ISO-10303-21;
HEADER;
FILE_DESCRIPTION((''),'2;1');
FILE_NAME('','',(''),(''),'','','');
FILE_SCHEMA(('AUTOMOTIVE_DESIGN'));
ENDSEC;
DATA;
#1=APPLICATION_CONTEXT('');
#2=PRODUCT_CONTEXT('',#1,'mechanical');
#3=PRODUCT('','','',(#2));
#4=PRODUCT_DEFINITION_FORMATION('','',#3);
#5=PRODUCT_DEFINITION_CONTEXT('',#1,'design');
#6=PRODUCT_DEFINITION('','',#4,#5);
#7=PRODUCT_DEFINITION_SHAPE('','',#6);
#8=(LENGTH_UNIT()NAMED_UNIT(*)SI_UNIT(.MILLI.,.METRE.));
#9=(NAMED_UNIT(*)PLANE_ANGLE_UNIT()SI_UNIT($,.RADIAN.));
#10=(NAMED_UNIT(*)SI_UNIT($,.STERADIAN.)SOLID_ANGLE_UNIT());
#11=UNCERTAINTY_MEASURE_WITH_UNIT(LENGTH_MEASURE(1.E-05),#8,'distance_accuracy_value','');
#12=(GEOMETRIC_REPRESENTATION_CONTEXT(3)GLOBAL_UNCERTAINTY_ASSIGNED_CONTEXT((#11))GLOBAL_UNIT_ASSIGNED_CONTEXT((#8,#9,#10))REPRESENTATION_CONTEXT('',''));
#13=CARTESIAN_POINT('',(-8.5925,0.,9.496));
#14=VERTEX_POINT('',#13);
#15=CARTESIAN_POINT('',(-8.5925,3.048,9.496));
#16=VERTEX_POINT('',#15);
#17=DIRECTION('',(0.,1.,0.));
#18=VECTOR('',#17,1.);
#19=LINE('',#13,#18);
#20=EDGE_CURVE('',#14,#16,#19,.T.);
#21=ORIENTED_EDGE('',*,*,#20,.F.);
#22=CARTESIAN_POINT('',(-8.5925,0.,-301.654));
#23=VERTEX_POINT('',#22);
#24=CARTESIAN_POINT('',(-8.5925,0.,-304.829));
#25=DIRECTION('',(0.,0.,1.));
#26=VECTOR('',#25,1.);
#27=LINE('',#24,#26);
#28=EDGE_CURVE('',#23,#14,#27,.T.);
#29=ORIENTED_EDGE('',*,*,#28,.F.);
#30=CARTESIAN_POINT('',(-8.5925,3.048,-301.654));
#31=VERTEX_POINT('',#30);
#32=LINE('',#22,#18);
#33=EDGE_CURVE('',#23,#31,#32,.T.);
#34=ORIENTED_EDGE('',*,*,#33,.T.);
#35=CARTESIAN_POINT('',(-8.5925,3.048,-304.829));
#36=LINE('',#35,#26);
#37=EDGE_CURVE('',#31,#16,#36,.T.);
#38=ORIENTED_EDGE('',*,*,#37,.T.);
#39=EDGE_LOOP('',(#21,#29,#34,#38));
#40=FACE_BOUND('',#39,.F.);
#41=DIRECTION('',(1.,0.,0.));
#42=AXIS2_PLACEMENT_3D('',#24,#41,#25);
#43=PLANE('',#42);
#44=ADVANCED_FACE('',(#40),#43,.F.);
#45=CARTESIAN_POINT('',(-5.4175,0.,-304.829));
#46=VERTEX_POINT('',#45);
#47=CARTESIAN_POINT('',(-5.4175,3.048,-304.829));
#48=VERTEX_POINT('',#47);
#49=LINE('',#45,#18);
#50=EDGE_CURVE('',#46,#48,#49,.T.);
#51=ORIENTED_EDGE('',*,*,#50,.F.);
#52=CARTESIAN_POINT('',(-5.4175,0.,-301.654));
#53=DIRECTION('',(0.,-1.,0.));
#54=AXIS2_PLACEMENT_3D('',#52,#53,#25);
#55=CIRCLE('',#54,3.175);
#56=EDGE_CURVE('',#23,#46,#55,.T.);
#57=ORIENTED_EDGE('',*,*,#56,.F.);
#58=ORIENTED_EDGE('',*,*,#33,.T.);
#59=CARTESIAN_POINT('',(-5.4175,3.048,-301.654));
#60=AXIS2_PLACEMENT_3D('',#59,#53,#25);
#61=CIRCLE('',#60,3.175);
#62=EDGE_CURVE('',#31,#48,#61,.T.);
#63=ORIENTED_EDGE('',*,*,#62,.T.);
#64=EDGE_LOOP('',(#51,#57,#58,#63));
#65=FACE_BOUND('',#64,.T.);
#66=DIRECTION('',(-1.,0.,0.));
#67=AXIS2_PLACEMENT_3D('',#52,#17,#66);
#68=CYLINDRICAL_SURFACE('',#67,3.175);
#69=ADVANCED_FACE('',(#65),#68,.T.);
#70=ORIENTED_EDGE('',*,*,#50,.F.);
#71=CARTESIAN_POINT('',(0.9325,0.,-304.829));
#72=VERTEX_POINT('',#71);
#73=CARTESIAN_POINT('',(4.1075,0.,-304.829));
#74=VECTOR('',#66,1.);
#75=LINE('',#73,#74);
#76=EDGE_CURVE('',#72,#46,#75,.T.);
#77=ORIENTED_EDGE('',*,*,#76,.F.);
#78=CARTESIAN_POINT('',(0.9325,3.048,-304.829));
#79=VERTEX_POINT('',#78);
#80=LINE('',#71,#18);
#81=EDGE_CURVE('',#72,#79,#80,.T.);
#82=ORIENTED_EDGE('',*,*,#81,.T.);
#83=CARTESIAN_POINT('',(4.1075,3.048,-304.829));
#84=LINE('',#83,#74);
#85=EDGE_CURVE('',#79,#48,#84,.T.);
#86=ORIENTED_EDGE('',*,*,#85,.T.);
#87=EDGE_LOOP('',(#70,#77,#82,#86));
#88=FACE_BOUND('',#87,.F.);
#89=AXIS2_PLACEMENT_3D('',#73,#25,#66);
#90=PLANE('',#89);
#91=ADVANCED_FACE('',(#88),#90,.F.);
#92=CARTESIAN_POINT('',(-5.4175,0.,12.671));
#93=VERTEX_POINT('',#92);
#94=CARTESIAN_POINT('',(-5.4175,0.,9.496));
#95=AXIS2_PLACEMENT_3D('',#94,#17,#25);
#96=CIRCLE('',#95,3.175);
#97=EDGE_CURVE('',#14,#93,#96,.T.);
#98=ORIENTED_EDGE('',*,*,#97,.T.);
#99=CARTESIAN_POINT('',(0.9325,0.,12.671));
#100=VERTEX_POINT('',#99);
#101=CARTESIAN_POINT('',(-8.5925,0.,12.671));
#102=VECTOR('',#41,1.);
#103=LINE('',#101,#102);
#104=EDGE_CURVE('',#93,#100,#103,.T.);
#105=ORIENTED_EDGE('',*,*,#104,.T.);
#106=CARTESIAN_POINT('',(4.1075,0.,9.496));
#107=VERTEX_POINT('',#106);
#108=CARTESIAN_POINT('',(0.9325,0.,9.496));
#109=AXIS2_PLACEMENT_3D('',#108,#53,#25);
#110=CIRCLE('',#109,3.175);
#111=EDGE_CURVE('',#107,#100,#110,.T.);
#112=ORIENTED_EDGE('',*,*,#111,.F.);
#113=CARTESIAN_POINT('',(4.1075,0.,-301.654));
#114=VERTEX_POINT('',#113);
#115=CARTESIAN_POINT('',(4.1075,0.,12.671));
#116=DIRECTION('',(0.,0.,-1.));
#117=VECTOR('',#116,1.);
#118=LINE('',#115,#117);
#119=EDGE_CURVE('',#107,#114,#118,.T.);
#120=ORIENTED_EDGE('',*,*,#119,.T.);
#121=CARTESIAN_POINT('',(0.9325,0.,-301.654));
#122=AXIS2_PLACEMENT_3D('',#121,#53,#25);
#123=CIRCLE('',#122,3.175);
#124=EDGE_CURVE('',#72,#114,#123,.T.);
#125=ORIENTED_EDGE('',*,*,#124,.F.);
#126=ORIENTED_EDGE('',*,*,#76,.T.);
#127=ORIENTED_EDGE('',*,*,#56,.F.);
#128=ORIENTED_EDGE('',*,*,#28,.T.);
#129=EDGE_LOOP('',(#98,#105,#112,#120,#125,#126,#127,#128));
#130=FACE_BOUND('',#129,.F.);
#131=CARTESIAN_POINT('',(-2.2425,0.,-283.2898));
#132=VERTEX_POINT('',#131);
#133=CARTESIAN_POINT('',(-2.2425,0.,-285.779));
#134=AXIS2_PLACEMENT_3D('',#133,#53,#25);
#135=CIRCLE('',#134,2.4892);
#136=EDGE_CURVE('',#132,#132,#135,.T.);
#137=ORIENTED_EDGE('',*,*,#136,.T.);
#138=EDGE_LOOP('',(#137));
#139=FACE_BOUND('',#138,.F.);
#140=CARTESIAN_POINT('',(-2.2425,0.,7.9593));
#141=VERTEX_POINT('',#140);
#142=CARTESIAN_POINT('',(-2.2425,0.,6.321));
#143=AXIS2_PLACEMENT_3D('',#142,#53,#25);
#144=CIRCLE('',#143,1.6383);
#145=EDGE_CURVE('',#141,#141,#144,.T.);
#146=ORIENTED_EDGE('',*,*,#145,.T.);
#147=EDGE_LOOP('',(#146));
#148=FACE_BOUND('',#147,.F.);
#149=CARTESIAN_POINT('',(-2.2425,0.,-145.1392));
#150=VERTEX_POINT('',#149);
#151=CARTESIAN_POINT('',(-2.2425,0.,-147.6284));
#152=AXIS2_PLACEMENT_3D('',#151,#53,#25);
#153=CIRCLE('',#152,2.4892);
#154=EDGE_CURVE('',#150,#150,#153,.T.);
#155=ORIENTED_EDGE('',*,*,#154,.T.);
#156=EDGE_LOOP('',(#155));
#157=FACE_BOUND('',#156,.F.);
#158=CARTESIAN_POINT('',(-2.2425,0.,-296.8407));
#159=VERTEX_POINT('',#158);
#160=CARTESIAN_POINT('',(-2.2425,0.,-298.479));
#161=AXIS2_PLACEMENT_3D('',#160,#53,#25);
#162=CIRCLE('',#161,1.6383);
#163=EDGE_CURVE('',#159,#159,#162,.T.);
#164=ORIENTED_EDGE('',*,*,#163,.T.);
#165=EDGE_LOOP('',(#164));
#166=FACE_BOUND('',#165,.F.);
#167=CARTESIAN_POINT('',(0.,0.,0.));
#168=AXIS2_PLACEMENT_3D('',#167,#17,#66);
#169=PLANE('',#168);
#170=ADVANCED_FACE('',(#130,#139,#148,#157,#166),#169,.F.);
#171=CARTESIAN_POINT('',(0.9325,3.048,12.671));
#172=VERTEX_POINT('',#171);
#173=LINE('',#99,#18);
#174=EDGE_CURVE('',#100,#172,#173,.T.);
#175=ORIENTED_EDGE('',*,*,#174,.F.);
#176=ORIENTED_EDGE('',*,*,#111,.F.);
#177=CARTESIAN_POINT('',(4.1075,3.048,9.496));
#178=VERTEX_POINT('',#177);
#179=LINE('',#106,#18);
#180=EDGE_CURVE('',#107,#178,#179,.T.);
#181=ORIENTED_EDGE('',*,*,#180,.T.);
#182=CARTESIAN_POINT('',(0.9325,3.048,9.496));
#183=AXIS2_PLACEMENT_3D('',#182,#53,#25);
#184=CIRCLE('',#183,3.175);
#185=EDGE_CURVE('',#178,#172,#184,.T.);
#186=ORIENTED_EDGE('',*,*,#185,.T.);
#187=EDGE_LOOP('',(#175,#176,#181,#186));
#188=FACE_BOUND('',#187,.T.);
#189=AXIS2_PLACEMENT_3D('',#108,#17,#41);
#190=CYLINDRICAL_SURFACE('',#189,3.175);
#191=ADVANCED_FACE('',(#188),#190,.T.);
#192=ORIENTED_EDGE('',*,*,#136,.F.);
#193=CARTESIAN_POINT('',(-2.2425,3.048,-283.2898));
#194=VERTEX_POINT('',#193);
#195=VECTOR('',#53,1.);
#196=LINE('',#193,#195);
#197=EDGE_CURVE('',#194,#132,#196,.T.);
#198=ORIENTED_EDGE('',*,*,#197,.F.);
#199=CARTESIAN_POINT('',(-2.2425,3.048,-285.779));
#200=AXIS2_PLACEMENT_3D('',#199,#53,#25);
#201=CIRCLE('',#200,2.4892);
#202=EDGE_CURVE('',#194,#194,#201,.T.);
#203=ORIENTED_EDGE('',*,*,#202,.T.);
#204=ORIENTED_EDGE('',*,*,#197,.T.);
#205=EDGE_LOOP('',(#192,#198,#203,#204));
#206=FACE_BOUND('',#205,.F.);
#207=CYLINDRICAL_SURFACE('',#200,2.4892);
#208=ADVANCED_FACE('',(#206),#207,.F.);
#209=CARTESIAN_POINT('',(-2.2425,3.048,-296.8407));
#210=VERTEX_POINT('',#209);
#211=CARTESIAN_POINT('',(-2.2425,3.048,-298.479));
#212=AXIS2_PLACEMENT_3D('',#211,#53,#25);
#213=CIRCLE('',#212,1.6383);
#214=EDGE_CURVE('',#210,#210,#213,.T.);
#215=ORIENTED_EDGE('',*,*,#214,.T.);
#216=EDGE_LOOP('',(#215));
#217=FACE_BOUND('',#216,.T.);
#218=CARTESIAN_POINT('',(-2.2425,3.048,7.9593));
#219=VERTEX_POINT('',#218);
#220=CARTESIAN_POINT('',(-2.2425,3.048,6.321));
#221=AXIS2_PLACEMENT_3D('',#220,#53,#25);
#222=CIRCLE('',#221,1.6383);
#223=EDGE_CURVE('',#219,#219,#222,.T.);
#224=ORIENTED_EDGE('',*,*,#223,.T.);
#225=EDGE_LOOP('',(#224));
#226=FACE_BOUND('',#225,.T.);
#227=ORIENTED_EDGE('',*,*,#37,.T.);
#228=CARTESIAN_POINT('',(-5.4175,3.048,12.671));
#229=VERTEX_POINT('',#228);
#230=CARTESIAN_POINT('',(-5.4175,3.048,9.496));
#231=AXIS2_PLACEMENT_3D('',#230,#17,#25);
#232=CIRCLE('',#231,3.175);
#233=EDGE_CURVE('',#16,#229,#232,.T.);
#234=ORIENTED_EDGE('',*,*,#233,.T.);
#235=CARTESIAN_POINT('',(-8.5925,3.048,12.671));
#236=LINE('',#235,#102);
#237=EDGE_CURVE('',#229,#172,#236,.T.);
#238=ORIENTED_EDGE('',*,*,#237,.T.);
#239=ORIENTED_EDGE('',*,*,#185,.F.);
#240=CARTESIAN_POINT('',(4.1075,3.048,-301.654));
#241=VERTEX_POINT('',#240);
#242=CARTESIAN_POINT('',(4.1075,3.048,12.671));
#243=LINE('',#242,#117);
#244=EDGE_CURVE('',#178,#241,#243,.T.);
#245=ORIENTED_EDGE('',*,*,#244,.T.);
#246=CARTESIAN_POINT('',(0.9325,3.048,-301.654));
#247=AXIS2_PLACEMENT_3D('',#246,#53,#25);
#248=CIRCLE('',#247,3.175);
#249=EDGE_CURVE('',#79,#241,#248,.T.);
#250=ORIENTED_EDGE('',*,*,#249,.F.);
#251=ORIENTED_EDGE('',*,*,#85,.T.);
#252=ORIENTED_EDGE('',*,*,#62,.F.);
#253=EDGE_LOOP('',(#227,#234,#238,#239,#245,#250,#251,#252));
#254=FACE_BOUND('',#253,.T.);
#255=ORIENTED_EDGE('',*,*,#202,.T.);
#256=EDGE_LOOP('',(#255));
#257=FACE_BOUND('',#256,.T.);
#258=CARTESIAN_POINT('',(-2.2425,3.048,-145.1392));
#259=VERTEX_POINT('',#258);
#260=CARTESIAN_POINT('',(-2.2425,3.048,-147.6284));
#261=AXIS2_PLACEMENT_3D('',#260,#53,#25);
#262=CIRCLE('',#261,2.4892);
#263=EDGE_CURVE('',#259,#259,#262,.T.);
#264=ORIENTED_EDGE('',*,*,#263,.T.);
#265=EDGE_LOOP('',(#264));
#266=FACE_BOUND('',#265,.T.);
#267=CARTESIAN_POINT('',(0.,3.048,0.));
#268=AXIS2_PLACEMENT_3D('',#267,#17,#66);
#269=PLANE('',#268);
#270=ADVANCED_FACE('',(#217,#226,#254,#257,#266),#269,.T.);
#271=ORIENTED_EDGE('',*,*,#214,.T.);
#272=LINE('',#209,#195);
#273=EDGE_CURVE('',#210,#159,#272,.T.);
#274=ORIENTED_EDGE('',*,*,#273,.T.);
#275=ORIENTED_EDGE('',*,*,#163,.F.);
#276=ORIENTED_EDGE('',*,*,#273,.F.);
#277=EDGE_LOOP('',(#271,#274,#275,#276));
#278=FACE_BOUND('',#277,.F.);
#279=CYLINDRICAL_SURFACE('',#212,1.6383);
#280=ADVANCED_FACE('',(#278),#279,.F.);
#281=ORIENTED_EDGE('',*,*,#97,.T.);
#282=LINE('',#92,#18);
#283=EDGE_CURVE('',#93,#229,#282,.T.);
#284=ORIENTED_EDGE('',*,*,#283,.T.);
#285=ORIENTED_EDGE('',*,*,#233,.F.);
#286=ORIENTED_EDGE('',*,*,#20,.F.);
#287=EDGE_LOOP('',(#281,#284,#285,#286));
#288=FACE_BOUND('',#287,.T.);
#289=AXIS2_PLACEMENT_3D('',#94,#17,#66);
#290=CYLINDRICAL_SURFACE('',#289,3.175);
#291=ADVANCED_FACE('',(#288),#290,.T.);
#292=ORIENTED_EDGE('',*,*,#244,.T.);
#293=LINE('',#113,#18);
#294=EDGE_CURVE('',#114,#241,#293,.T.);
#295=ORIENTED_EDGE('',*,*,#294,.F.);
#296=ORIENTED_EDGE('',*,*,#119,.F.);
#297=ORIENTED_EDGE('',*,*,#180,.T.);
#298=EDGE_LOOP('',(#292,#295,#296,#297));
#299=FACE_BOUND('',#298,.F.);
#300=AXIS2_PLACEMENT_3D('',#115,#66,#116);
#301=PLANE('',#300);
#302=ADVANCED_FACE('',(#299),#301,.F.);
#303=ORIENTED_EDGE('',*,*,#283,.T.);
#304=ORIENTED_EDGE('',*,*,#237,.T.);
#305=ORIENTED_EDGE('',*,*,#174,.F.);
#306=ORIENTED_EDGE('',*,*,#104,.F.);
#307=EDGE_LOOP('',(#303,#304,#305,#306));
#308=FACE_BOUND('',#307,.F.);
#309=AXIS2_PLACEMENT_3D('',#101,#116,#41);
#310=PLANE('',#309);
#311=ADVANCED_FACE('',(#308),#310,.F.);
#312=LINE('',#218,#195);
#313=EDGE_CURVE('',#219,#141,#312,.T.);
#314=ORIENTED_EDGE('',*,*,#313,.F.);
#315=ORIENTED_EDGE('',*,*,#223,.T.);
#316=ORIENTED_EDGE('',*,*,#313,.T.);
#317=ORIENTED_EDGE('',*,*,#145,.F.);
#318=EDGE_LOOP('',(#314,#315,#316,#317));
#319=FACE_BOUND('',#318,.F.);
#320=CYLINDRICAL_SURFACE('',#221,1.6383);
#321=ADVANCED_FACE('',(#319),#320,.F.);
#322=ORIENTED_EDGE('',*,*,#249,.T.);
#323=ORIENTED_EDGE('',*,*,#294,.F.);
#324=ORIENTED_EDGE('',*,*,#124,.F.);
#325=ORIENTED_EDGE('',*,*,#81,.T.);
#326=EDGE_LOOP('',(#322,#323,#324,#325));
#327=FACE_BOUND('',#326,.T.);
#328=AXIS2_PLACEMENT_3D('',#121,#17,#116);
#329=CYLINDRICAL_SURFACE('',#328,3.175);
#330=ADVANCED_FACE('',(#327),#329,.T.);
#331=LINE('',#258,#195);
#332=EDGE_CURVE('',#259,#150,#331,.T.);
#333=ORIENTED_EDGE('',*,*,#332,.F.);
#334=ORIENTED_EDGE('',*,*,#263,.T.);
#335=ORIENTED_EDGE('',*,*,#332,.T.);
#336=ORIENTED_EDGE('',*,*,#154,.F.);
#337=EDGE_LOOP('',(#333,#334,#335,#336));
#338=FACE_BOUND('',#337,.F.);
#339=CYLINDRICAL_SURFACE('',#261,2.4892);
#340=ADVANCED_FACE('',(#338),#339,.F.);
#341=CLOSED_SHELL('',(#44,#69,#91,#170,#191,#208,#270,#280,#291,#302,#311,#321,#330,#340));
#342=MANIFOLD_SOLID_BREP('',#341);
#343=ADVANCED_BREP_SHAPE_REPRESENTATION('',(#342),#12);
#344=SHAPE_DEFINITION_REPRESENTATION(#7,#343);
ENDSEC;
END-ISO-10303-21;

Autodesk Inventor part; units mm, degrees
ref_plane "YZ Plane" through (0, 0, 0) normal (1, 0, 0) x (0, 1, 0)
ref_plane "XZ Plane" through (0, 0, 0) normal (0, 1, 0) x (-1, 0, 0)
ref_plane "XY Plane" through (0, 0, 0) normal (0, 0, 1) x (1, 0, 0)
sketch "Sketch1" plane through (0, 0, 0) normal (0, 1, 0) x (-1, 0, 0)
  line L0 (8.5925, 12.671) -> (-4.1075, 12.671)
  line L1 (-4.1075, 12.671) -> (-4.1075, -304.829)
  line L2 (-4.1075, -304.829) -> (8.5925, -304.829)
  line L3 (8.5925, -304.829) -> (8.5925, 12.671)
  point P0 (0, 0)
  dimension "d0" = 12.7
  dimension "d1" = 317.5
extrude "Plate1" add sketch "Sketch1" along normal blind 3.048
fillet "Corner Round1" radius 3.175 4 edges at (4.1075, 1.524, 12.671) (-8.5925, 1.524, 12.671) (-8.5925, 1.524, -304.829) (4.1075, 1.524, -304.829)
sketch "Sketch2" plane through (0, 3.048, 0) normal (0, 1, 0) x (1, 0, 0)
  line L0 (0.9325, -12.671) -> (-5.4175, -12.671) projected
  line L1 (4.1075, 301.654) -> (4.1075, -9.496) projected
  line L2 (-5.4175, 304.829) -> (0.9325, 304.829) projected
  point P0 (0, 0)
  point P1 (-2.2425, -6.321)
  point P2 (-2.2425, 298.479)
  dimension "d4" = 6.35
  dimension "d5" = 6.35
  dimension "d6" = 6.35
  dimension "d7" = 6.35
hole "Hole1" at (-2.2425, 3.048, 6.321) at (-2.2425, 3.048, -298.479) direction (0, -1, 0) diameter 3.2766 end through all clearance for "Flat Head Machine Screw (82)" size "#4" standard "Ansi Unified Screw Threads"
sketch "Sketch3" plane through (0, 3.048, 0) normal (0, 1, 0) x (1, 0, 0)
  line L0 (4.1075, 301.654) -> (4.1075, -9.496) projected
  circle A0 centre (-2.2425, 298.479) radius 1.6383 projected
  point P0 (0, 0)
  point P1 (-2.2425, 285.779)
  point P2 (-2.2425, 147.6284)
  dimension "d15" = 6.35
  dimension "d16" = 6.35
  dimension "d17" = 138.1506
  dimension "d18" = 12.7
hole "Hole2" at (-2.2425, 3.048, -285.779) at (-2.2425, 3.048, -147.6284) direction (0, -1, 0) diameter 4.9784 end through all thread size "1/4-20 UNC" class "2B" standard "ANSI Unified Screw Threads"
equation "\"BendRadius\" = Thickness"
equation "\"BendReliefWidth\" = Thickness"
equation "\"BendReliefDepth\" = 0.5 * Thickness"
equation "\"CornerReliefSize\" = 4 * Thickness"
equation "\"MinimumRemnant\" = 2 * Thickness"
equation "\"TransitionRadius\" = BendRadius"
equation "\"JacobiRadiusSize\" = BendRadius"
equation "\"GapSize\" = Thickness"
equation "\"d2\" = BendRadius"
equation "\"Thickness\" = 3.048"
properties part number "Compressor_Strut" material "Aluminum 6061"
